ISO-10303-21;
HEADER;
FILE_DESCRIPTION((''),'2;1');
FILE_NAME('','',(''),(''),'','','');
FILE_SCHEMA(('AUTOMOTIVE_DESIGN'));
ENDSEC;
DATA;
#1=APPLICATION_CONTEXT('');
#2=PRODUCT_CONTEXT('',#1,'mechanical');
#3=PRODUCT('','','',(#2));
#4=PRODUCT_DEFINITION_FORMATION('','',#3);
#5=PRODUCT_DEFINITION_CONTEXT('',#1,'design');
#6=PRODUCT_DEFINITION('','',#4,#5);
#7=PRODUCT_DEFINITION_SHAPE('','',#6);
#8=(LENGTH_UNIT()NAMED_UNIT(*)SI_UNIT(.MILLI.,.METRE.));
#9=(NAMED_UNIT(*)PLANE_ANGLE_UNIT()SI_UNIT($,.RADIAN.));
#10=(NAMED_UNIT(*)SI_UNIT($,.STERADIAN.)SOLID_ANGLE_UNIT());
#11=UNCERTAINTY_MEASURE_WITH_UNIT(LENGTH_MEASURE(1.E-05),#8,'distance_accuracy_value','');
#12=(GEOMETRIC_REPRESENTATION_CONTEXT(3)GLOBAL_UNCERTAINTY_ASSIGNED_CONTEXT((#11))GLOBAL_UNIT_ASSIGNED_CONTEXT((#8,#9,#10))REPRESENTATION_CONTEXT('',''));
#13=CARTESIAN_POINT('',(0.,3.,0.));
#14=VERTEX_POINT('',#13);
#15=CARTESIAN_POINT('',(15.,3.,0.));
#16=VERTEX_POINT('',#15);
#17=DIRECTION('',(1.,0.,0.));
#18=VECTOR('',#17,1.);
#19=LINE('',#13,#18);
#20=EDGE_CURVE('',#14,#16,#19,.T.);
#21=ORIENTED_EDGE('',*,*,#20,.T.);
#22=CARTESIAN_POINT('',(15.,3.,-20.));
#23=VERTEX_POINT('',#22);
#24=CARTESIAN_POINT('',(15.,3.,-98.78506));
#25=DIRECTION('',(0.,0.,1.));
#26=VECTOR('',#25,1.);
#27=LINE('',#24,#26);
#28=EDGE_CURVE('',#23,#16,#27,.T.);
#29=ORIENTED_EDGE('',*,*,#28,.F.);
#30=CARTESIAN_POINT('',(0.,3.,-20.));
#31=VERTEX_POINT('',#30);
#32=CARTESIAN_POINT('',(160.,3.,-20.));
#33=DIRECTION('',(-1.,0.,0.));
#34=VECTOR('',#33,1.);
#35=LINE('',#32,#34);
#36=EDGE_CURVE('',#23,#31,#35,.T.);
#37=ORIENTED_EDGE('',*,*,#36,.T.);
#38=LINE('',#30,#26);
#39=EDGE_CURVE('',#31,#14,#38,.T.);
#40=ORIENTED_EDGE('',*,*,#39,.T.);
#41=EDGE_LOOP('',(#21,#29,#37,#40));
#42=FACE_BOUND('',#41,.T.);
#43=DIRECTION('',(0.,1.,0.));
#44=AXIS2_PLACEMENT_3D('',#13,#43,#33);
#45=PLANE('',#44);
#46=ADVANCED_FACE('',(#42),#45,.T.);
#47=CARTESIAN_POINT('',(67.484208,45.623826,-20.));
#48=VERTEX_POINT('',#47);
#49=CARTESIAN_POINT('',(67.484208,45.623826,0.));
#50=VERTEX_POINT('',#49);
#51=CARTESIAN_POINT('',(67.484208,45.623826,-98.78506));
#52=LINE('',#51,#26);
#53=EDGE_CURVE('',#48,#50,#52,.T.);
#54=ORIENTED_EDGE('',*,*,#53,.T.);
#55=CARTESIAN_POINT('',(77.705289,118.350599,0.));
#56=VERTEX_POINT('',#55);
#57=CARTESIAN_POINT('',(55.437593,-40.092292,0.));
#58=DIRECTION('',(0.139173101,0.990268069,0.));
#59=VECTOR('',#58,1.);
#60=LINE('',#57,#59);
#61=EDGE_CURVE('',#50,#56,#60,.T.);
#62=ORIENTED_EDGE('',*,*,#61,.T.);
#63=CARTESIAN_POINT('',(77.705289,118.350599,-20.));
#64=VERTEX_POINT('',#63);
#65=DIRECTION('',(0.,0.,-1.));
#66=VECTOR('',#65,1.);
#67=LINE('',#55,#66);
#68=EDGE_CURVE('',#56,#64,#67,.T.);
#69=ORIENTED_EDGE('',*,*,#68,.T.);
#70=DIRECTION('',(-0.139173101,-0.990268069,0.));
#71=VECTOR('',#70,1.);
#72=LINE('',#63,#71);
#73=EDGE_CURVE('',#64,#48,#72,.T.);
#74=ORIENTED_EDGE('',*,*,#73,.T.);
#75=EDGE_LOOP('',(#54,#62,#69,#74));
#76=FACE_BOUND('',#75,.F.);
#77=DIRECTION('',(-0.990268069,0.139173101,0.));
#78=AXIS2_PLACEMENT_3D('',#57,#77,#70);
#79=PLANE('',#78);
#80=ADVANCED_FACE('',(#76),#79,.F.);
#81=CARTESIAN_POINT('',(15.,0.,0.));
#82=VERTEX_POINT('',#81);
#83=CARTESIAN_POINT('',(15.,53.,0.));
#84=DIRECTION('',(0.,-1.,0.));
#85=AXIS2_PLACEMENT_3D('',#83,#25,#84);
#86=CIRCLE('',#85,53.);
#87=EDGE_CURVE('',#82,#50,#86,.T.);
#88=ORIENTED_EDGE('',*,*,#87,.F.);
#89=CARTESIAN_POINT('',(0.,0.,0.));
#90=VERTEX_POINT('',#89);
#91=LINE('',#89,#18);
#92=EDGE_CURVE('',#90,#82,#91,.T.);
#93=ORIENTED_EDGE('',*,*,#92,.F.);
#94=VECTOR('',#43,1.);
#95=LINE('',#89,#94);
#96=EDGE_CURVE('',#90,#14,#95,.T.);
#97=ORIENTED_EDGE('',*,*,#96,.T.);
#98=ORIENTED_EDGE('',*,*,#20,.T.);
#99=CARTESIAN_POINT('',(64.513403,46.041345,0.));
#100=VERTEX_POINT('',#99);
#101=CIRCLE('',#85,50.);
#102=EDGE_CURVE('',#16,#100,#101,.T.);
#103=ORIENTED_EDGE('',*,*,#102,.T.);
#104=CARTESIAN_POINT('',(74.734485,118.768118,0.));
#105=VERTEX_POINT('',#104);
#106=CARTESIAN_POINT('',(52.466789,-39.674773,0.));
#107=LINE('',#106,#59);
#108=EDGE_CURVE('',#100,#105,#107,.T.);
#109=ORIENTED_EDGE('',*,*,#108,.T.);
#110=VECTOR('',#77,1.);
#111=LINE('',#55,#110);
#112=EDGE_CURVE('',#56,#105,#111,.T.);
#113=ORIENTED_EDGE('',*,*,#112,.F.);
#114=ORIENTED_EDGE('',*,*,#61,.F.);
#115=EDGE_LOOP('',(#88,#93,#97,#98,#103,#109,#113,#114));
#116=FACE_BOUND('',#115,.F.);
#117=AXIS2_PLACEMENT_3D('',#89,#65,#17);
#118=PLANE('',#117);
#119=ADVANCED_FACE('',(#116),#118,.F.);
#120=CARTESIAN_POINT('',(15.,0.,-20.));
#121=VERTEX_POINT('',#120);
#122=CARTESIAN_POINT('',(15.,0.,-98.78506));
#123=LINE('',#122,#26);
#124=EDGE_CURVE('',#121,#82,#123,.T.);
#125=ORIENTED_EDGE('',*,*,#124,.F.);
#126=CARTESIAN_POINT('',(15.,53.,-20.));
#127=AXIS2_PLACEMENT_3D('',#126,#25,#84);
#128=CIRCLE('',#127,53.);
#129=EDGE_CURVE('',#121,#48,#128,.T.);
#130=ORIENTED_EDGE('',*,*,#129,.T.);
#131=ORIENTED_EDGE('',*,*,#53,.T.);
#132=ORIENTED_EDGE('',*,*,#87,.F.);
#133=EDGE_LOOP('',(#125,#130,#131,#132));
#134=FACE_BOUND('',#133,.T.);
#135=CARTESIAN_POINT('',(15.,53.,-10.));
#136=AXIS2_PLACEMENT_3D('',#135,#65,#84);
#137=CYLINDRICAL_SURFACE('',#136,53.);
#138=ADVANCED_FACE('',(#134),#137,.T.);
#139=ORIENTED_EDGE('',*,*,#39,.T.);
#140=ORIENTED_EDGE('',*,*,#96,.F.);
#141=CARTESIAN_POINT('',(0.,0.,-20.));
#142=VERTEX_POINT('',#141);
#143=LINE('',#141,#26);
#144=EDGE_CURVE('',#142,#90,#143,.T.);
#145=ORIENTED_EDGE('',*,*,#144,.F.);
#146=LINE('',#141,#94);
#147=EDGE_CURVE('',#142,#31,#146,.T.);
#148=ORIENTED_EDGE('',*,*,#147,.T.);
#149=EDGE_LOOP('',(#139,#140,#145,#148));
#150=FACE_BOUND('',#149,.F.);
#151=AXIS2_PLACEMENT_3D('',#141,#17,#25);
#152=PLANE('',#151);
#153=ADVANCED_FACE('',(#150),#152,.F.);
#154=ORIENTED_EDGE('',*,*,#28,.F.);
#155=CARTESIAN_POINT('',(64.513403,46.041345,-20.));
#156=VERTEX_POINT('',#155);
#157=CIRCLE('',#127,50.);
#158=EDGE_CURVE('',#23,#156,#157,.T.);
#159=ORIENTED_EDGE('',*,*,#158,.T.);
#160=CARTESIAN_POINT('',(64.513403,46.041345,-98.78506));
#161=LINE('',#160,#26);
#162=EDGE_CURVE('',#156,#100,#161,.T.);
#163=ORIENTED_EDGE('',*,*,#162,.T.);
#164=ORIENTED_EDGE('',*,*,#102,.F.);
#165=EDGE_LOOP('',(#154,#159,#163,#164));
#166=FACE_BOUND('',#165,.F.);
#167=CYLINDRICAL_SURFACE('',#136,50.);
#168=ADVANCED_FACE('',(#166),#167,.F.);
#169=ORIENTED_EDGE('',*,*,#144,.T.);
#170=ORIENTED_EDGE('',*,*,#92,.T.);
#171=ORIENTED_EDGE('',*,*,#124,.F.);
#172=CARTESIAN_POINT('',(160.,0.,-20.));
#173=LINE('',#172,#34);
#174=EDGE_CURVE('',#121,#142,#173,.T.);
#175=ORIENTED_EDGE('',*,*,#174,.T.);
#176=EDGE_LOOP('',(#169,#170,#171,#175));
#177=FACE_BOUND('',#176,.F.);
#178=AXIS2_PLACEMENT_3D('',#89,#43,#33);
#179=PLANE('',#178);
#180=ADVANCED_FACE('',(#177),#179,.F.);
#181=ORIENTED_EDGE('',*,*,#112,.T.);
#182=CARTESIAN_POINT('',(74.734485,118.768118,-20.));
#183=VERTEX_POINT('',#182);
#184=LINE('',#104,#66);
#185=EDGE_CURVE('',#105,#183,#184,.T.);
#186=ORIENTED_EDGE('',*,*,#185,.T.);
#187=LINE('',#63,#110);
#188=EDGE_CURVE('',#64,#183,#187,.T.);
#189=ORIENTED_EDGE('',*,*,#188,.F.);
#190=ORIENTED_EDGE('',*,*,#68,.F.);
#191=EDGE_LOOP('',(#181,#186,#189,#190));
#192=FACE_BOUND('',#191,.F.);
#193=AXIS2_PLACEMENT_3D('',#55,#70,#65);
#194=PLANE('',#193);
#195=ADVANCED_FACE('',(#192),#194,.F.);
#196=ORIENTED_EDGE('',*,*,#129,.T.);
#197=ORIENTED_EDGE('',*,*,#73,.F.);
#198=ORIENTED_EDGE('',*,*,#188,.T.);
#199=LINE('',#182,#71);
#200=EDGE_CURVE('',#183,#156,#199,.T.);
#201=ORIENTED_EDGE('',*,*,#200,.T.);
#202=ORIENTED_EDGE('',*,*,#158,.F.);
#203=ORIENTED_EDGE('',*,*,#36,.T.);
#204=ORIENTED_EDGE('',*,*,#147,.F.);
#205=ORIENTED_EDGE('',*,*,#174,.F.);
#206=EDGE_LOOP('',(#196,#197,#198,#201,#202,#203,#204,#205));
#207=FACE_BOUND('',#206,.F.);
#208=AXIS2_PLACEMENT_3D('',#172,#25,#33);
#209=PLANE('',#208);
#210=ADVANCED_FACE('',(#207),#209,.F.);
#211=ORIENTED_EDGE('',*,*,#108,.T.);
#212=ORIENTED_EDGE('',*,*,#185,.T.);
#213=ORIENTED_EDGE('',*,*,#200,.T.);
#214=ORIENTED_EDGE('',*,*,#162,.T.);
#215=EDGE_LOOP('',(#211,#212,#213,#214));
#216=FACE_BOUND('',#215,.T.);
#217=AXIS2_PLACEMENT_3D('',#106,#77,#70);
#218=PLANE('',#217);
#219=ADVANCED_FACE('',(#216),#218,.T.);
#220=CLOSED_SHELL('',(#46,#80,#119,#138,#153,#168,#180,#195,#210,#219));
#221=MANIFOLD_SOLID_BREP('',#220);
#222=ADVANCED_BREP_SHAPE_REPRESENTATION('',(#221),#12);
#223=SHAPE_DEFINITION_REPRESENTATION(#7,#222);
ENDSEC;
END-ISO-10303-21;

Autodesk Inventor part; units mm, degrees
ref_plane "YZ Plane" through (0, 0, 0) normal (1, 0, 0) x (0, 1, 0)
ref_plane "XZ Plane" through (0, 0, 0) normal (0, 1, 0) x (-1, 0, 0)
ref_plane "XY Plane" through (0, 0, 0) normal (0, 0, 1) x (1, 0, 0)
sketch "Sketch2" plane through (0, 0, 0) normal (0, 1, 0) x (-1, 0, 0)
  line L0 (0, 0) -> (-160, 0)
  line L1 (-160, 0) -> (-160, -20)
  line L2 (-160, -20) -> (0, -20)
  line L3 (0, -20) -> (0, 0)
  dimension "d0" = 160
  dimension "d1" = 20
extrude "Extrusion1" add sketch "Sketch2" along normal blind 3
sketch "Sketch3" plane through (0, 3, 0) normal (0, 1, 0) x (1, 0, 0)
  line L0 (160, 20) -> (0, 20) projected
  line L1 (160, 0) -> (160, 20) projected
  line L2 (160, 20) -> (160, 0)
  line L3 (15, 20) -> (15, 0)
  line L4 (0, 0) -> (160, 0) projected
  line L5 (0, 20) -> (0, 0) projected
  dimension "d8" = 15
bend part "Bend Part1" radius 50 angle 82 line through (15, 3, -20) along (0, 0, 1) centre toward (0, 1, 0) moving side (1, 0, 0) both sides no
properties part number "ball-reload-left"
